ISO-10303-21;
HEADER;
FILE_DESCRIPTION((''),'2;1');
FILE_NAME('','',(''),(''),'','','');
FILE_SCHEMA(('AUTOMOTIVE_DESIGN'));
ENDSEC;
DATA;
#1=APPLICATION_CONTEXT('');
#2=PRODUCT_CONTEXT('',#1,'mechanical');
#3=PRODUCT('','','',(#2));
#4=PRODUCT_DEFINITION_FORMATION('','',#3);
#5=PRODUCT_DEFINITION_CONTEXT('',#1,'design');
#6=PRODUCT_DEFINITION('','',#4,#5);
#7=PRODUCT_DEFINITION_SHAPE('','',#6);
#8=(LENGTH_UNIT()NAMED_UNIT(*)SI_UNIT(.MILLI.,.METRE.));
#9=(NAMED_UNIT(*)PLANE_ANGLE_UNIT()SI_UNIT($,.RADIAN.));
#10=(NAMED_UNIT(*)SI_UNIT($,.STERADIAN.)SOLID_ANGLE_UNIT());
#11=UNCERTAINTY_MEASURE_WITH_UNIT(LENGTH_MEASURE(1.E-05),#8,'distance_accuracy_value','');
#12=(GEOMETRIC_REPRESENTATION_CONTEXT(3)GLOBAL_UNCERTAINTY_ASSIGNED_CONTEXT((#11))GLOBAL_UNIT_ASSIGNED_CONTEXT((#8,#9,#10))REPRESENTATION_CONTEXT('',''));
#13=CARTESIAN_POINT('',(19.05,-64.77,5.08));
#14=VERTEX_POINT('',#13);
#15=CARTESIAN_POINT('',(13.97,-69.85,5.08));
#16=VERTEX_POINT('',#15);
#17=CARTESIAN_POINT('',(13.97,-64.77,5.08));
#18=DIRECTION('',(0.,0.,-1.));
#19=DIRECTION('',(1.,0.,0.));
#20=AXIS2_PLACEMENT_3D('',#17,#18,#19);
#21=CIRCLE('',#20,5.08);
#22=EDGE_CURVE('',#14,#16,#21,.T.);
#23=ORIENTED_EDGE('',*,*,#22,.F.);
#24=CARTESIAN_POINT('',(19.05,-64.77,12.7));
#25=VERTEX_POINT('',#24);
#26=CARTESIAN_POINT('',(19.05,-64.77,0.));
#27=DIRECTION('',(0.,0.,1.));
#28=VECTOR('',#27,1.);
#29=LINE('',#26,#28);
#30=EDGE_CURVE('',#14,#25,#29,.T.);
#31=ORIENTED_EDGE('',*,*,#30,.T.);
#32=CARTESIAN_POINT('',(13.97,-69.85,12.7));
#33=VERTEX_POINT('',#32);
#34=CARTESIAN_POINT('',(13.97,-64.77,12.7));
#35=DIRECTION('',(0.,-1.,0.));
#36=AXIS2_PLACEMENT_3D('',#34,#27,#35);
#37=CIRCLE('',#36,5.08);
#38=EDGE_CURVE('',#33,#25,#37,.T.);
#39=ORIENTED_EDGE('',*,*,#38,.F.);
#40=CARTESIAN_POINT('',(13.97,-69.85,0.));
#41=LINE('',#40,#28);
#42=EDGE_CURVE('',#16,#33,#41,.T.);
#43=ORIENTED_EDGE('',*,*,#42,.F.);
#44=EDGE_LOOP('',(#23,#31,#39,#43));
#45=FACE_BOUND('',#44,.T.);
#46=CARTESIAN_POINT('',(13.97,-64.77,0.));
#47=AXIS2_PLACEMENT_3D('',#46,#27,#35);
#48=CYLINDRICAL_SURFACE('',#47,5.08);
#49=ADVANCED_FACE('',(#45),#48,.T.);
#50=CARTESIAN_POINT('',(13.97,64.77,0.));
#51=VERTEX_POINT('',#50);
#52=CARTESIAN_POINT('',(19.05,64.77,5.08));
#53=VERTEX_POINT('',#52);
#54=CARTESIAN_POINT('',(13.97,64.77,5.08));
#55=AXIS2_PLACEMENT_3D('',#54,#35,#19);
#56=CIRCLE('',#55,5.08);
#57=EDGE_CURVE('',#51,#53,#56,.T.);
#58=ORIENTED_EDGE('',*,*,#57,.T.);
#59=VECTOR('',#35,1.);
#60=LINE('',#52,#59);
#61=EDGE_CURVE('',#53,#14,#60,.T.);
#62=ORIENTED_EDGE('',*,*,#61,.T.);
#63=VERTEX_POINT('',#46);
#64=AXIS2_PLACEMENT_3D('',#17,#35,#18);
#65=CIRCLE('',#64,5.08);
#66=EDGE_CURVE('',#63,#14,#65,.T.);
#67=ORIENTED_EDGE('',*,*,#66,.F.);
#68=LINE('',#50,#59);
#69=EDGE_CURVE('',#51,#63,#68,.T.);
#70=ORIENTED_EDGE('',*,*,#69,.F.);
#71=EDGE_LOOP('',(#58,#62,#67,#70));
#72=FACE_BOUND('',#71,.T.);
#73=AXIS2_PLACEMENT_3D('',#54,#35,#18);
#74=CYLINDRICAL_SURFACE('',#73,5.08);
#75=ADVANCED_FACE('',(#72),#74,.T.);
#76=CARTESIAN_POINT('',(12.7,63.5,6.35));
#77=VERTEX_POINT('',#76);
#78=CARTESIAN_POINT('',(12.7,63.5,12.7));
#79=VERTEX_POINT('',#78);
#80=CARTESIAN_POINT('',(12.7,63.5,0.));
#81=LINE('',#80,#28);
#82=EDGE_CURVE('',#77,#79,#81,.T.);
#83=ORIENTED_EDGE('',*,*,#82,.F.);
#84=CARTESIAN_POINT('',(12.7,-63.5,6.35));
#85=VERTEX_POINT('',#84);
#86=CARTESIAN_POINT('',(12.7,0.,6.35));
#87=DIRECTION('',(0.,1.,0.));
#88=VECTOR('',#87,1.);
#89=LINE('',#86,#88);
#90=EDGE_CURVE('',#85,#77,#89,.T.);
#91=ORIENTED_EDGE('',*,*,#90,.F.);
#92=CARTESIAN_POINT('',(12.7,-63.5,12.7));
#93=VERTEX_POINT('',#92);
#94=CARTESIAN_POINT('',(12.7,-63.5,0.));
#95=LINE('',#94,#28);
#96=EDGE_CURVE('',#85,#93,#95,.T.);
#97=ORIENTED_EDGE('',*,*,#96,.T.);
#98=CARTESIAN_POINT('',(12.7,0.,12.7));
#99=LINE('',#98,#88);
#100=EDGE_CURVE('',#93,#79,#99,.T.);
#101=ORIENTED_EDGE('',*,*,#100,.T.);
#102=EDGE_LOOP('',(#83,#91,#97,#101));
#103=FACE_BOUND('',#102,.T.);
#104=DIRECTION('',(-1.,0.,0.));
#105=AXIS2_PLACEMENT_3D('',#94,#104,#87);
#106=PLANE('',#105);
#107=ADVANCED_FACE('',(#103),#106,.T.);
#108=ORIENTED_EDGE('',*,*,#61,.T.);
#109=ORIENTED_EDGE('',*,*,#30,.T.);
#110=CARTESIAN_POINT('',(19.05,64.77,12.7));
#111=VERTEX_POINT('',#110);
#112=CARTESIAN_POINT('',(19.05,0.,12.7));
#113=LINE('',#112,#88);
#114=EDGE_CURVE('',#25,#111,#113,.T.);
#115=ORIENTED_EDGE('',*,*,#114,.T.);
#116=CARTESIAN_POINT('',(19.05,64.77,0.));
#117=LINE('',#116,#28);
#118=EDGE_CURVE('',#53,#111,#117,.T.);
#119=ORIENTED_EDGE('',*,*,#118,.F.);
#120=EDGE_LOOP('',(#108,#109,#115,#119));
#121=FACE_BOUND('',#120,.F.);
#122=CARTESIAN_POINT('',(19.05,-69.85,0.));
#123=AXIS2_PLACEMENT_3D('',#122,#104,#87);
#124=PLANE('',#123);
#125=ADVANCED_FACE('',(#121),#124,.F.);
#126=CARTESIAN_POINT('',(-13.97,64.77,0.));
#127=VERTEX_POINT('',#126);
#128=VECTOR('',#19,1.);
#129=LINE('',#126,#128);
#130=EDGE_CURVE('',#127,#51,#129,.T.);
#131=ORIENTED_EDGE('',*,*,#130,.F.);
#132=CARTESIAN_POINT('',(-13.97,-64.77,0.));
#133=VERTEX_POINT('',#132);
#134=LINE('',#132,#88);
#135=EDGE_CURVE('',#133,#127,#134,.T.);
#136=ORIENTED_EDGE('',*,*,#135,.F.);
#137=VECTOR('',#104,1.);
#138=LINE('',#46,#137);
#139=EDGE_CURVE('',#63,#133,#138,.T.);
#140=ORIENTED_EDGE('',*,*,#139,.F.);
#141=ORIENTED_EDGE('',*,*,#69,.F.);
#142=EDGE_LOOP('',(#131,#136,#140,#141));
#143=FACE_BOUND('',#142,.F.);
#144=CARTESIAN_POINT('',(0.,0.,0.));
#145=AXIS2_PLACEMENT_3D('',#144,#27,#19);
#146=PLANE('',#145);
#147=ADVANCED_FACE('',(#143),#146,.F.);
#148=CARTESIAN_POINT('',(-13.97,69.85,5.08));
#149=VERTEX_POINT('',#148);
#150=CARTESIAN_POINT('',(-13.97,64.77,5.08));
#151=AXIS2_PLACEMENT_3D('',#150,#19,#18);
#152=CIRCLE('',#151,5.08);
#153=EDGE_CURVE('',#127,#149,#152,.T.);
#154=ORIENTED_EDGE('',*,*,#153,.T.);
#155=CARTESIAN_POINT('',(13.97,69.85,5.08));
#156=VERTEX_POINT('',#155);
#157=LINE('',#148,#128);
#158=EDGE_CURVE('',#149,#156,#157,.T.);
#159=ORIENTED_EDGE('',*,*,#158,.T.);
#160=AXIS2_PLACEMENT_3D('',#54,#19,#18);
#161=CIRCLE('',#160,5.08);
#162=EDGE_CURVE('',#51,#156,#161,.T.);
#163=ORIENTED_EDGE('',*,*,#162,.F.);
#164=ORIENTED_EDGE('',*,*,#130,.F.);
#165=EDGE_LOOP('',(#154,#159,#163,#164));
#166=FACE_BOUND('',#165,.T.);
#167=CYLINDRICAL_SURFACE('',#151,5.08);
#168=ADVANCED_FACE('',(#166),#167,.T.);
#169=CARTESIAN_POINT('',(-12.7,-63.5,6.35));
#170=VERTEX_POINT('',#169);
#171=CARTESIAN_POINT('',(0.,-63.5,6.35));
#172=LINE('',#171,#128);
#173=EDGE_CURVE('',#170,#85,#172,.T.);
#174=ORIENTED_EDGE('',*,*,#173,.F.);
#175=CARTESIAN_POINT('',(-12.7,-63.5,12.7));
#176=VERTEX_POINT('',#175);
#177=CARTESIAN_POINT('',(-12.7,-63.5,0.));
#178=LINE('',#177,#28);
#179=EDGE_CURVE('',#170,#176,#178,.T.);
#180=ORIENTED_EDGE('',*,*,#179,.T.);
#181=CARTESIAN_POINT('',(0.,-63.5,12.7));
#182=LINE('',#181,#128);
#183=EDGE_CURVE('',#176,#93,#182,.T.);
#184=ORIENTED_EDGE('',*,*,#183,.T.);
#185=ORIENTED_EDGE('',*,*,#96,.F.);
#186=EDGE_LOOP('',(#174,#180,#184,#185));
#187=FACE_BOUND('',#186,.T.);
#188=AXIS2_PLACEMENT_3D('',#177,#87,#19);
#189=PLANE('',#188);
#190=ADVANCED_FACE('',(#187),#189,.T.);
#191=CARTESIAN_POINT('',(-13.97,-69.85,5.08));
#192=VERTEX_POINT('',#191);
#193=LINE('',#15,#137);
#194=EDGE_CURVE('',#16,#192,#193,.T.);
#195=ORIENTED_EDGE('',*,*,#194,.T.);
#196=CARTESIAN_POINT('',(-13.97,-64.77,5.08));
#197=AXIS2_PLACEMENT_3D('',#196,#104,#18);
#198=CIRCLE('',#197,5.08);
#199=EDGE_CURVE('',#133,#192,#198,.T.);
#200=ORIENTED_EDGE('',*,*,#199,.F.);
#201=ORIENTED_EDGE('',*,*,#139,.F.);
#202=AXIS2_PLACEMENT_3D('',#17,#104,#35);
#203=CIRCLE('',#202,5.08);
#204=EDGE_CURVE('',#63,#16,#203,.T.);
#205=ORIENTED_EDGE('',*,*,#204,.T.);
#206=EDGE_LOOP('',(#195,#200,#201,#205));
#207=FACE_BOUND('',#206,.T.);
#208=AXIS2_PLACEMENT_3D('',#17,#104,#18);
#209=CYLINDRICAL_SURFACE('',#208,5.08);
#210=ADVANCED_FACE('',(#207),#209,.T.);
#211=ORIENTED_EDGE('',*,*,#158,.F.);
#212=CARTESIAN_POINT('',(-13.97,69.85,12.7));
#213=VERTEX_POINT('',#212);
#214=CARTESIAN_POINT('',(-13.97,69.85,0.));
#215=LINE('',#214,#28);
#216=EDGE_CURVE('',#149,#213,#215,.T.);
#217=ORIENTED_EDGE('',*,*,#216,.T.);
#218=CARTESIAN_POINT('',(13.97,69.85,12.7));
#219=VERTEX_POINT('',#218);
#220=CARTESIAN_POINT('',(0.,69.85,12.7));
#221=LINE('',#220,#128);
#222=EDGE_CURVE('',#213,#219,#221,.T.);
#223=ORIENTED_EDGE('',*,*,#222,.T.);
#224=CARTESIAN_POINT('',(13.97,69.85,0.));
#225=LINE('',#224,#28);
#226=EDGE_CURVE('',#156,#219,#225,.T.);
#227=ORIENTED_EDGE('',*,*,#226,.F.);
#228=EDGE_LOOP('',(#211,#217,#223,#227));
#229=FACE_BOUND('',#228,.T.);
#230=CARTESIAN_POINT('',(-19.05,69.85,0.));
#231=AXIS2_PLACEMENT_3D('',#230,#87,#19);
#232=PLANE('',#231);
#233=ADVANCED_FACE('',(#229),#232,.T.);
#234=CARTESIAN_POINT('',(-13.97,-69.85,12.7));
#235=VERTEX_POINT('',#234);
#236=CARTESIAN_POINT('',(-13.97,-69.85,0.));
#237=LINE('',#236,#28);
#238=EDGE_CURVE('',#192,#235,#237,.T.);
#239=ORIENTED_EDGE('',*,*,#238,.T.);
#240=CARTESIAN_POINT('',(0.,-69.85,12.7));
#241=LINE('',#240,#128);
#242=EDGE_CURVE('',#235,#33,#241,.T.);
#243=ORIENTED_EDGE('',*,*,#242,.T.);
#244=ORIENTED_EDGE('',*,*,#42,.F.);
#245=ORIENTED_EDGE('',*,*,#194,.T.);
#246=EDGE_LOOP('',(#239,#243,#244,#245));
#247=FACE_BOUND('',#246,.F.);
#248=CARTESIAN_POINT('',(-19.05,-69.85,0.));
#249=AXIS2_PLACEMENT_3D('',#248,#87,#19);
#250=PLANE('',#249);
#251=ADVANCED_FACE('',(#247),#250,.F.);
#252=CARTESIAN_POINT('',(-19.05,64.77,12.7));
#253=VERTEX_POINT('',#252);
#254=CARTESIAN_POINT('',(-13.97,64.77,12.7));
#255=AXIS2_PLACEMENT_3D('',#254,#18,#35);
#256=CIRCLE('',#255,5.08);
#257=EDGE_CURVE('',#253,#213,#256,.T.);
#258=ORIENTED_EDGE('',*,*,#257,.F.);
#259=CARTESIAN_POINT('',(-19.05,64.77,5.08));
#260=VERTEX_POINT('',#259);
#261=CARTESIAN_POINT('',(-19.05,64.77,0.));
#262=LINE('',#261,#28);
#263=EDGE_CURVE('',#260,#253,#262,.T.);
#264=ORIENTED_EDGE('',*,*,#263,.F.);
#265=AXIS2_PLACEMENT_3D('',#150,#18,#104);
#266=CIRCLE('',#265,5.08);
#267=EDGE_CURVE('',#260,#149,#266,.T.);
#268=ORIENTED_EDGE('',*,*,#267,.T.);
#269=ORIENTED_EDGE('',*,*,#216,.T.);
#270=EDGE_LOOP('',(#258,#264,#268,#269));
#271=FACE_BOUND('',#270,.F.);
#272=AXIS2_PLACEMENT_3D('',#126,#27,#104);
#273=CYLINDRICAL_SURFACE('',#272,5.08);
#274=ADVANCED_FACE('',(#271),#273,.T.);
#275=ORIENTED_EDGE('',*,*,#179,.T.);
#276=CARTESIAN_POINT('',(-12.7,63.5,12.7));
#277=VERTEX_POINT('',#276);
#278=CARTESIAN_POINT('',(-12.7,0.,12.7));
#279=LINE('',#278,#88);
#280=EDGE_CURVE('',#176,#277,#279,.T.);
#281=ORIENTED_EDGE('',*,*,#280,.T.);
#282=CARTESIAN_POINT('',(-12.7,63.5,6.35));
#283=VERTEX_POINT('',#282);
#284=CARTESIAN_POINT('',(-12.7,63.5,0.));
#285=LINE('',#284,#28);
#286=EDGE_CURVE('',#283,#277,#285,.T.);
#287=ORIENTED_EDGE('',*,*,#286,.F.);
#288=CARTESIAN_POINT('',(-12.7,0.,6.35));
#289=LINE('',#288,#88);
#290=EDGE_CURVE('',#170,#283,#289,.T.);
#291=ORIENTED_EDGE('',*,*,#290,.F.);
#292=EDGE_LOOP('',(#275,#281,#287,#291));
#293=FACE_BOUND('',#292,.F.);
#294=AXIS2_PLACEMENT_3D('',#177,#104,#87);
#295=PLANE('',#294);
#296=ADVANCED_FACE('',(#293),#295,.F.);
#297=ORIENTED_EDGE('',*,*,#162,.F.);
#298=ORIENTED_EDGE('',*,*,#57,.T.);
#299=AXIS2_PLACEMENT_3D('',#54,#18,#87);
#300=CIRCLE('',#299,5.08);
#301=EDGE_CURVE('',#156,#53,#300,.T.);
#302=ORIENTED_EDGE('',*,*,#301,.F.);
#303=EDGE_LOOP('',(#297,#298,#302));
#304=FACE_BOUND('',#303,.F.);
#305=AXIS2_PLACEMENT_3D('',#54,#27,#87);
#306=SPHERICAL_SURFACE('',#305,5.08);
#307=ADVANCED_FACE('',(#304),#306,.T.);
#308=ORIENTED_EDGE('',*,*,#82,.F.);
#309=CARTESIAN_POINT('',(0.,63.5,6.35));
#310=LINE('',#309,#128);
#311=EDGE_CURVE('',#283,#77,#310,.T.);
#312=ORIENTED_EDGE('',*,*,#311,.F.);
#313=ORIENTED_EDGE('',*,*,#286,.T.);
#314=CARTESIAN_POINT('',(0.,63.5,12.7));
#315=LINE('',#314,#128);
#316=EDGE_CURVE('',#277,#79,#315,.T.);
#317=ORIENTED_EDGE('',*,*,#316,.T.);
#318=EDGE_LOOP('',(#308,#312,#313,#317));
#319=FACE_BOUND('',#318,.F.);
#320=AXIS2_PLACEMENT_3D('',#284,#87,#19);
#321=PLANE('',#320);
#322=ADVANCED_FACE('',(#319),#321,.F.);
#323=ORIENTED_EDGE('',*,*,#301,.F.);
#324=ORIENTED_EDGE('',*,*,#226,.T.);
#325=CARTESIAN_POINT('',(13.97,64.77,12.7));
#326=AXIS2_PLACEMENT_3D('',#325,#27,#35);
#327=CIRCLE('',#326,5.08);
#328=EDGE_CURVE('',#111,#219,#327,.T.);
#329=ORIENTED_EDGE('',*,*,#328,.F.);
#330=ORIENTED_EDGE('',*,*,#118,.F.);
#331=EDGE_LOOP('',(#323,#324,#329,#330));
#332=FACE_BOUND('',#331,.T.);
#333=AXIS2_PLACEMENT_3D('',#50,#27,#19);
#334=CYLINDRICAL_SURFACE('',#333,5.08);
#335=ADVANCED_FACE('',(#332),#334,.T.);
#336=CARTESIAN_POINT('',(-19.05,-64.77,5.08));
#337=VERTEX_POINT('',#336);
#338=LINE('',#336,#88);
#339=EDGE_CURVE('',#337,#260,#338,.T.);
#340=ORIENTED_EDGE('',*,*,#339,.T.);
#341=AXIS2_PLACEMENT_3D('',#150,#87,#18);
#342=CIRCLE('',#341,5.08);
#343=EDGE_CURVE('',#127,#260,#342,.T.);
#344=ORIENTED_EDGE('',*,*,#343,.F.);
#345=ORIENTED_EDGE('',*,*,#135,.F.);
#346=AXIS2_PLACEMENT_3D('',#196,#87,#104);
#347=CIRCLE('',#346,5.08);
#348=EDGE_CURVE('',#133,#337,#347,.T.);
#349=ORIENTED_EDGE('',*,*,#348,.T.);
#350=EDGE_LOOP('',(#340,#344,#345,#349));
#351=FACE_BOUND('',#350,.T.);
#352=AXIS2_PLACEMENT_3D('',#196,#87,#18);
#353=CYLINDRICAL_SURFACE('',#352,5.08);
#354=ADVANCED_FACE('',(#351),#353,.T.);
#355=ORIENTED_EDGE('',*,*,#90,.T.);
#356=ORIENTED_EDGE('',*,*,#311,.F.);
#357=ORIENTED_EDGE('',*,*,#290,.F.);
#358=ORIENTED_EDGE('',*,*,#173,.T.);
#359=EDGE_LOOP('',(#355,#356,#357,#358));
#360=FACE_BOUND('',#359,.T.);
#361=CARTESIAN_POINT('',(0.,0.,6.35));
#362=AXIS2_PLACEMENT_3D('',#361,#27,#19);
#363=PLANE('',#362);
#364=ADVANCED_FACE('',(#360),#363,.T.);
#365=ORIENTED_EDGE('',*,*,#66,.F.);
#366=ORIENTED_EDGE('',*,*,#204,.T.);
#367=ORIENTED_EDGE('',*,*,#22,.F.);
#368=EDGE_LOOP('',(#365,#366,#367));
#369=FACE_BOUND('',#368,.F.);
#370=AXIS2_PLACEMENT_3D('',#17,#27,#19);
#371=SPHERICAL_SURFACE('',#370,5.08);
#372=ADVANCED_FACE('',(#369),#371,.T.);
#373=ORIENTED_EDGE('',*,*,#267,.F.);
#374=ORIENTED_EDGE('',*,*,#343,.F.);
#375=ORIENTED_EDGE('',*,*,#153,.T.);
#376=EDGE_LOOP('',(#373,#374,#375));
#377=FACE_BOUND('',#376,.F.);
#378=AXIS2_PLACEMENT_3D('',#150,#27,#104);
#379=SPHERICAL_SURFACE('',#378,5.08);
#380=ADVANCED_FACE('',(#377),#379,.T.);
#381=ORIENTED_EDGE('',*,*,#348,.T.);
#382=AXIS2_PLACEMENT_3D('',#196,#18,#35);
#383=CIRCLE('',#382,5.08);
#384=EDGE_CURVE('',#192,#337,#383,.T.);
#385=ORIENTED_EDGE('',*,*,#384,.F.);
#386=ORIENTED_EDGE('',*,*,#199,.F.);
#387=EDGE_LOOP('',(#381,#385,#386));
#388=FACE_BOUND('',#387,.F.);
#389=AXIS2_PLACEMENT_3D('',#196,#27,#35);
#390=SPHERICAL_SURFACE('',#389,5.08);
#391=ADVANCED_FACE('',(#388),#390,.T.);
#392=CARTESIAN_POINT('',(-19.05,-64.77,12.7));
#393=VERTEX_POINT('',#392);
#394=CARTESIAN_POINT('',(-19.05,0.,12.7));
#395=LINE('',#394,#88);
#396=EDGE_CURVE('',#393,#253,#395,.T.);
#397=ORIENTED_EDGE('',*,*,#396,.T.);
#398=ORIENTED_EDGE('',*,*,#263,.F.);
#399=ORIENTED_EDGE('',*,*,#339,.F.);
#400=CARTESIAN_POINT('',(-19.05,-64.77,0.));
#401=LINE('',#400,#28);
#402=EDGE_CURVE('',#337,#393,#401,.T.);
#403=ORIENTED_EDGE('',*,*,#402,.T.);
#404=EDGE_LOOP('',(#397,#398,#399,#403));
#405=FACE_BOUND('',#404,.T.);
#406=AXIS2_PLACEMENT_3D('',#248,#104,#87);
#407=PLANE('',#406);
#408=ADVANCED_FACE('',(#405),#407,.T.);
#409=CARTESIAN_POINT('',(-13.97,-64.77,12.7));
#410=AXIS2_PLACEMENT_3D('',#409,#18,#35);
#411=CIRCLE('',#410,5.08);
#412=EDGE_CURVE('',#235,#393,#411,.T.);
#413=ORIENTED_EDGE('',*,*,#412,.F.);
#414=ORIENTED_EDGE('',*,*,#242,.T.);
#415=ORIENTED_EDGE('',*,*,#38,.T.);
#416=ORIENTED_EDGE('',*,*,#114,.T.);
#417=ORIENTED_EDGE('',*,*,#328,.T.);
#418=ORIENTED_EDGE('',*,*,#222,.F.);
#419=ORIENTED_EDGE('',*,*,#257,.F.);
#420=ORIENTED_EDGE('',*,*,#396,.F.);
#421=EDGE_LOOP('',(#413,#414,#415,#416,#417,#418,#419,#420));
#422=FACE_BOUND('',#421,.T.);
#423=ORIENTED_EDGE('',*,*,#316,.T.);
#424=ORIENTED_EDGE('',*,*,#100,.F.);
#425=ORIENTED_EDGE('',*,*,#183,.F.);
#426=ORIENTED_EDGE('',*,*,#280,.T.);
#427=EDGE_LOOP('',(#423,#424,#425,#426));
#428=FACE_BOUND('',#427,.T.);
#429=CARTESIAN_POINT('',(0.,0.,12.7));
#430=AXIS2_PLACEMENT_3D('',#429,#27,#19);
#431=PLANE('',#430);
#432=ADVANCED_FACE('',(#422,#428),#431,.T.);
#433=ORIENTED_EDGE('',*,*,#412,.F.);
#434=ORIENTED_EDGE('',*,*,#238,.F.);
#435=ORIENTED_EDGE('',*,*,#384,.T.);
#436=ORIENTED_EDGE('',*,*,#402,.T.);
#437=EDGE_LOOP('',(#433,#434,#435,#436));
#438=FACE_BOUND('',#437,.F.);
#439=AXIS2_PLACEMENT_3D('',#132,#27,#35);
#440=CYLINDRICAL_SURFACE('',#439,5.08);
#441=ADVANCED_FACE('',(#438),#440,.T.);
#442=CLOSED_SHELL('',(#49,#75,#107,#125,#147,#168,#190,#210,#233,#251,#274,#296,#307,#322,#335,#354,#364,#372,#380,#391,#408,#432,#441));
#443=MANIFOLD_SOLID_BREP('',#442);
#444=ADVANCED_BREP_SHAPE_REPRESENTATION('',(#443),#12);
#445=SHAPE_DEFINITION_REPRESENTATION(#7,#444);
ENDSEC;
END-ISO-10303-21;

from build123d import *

# Parameters (mm, degrees)
F0_W     = 38.1
F0_H     = 139.7
F0_W_2   = 25.4
F0_H_2   = 127
F1_DEPTH = 12.7
F2_DEPTH = 6.35
F3_F1_R  = 5.08
F3_F2_R  = 5.08
F3_F3_R  = 5.08
F3_F4_R  = 5.08
F3_F5_R  = 5.08


# Not quite as in the source:
# - a feature of the source that left no trace in its solid (it failed there, or was rolled back) is left out


with BuildPart() as f1:
    # F0 (on Top) → F1 (new body)
    with BuildSketch(Plane.XY):
        Rectangle(F0_W, F0_H)
        Rectangle(F0_W_2, F0_H_2, mode=Mode.SUBTRACT)
    extrude(amount=F1_DEPTH)

    # F0 (on Top) → F2 (join)
    with BuildSketch(Plane.XY):
        Rectangle(F0_W_2, F0_H_2)
    extrude(amount=F2_DEPTH)

    # F3: fillet of radius 5.08 on 6 edges, made by hand

    # F3_f1
    f3_f1_edges = [f1.edges().sort_by_distance(p)[0] for p in [
        (19.05, -69.85, 6.35),
    ]]
    fillet(f3_f1_edges, radius=F3_F1_R)

    # F3_f2
    f3_f2_edges = [f1.edges().sort_by_distance(p)[0] for p in [
        (19.05, 69.85, 6.35),
    ]]
    fillet(f3_f2_edges, radius=F3_F2_R)

    # F3_f3
    f3_f3_edges = [f1.edges().sort_by_distance(p)[0] for p in [
        (-19.05, -69.85, 6.35),
    ]]
    fillet(f3_f3_edges, radius=F3_F3_R)

    # F3_f4
    f3_f4_edges = [f1.edges().sort_by_distance(p)[0] for p in [
        (-19.05, 69.85, 6.35),
    ]]
    fillet(f3_f4_edges, radius=F3_F4_R)

    # F3_f5
    f3_f5_edges = [f1.edges().sort_by_distance(p)[0] for p in [
        (0, 69.85, 0),
    ]]
    fillet(f3_f5_edges, radius=F3_F5_R)


solid = f1.part
